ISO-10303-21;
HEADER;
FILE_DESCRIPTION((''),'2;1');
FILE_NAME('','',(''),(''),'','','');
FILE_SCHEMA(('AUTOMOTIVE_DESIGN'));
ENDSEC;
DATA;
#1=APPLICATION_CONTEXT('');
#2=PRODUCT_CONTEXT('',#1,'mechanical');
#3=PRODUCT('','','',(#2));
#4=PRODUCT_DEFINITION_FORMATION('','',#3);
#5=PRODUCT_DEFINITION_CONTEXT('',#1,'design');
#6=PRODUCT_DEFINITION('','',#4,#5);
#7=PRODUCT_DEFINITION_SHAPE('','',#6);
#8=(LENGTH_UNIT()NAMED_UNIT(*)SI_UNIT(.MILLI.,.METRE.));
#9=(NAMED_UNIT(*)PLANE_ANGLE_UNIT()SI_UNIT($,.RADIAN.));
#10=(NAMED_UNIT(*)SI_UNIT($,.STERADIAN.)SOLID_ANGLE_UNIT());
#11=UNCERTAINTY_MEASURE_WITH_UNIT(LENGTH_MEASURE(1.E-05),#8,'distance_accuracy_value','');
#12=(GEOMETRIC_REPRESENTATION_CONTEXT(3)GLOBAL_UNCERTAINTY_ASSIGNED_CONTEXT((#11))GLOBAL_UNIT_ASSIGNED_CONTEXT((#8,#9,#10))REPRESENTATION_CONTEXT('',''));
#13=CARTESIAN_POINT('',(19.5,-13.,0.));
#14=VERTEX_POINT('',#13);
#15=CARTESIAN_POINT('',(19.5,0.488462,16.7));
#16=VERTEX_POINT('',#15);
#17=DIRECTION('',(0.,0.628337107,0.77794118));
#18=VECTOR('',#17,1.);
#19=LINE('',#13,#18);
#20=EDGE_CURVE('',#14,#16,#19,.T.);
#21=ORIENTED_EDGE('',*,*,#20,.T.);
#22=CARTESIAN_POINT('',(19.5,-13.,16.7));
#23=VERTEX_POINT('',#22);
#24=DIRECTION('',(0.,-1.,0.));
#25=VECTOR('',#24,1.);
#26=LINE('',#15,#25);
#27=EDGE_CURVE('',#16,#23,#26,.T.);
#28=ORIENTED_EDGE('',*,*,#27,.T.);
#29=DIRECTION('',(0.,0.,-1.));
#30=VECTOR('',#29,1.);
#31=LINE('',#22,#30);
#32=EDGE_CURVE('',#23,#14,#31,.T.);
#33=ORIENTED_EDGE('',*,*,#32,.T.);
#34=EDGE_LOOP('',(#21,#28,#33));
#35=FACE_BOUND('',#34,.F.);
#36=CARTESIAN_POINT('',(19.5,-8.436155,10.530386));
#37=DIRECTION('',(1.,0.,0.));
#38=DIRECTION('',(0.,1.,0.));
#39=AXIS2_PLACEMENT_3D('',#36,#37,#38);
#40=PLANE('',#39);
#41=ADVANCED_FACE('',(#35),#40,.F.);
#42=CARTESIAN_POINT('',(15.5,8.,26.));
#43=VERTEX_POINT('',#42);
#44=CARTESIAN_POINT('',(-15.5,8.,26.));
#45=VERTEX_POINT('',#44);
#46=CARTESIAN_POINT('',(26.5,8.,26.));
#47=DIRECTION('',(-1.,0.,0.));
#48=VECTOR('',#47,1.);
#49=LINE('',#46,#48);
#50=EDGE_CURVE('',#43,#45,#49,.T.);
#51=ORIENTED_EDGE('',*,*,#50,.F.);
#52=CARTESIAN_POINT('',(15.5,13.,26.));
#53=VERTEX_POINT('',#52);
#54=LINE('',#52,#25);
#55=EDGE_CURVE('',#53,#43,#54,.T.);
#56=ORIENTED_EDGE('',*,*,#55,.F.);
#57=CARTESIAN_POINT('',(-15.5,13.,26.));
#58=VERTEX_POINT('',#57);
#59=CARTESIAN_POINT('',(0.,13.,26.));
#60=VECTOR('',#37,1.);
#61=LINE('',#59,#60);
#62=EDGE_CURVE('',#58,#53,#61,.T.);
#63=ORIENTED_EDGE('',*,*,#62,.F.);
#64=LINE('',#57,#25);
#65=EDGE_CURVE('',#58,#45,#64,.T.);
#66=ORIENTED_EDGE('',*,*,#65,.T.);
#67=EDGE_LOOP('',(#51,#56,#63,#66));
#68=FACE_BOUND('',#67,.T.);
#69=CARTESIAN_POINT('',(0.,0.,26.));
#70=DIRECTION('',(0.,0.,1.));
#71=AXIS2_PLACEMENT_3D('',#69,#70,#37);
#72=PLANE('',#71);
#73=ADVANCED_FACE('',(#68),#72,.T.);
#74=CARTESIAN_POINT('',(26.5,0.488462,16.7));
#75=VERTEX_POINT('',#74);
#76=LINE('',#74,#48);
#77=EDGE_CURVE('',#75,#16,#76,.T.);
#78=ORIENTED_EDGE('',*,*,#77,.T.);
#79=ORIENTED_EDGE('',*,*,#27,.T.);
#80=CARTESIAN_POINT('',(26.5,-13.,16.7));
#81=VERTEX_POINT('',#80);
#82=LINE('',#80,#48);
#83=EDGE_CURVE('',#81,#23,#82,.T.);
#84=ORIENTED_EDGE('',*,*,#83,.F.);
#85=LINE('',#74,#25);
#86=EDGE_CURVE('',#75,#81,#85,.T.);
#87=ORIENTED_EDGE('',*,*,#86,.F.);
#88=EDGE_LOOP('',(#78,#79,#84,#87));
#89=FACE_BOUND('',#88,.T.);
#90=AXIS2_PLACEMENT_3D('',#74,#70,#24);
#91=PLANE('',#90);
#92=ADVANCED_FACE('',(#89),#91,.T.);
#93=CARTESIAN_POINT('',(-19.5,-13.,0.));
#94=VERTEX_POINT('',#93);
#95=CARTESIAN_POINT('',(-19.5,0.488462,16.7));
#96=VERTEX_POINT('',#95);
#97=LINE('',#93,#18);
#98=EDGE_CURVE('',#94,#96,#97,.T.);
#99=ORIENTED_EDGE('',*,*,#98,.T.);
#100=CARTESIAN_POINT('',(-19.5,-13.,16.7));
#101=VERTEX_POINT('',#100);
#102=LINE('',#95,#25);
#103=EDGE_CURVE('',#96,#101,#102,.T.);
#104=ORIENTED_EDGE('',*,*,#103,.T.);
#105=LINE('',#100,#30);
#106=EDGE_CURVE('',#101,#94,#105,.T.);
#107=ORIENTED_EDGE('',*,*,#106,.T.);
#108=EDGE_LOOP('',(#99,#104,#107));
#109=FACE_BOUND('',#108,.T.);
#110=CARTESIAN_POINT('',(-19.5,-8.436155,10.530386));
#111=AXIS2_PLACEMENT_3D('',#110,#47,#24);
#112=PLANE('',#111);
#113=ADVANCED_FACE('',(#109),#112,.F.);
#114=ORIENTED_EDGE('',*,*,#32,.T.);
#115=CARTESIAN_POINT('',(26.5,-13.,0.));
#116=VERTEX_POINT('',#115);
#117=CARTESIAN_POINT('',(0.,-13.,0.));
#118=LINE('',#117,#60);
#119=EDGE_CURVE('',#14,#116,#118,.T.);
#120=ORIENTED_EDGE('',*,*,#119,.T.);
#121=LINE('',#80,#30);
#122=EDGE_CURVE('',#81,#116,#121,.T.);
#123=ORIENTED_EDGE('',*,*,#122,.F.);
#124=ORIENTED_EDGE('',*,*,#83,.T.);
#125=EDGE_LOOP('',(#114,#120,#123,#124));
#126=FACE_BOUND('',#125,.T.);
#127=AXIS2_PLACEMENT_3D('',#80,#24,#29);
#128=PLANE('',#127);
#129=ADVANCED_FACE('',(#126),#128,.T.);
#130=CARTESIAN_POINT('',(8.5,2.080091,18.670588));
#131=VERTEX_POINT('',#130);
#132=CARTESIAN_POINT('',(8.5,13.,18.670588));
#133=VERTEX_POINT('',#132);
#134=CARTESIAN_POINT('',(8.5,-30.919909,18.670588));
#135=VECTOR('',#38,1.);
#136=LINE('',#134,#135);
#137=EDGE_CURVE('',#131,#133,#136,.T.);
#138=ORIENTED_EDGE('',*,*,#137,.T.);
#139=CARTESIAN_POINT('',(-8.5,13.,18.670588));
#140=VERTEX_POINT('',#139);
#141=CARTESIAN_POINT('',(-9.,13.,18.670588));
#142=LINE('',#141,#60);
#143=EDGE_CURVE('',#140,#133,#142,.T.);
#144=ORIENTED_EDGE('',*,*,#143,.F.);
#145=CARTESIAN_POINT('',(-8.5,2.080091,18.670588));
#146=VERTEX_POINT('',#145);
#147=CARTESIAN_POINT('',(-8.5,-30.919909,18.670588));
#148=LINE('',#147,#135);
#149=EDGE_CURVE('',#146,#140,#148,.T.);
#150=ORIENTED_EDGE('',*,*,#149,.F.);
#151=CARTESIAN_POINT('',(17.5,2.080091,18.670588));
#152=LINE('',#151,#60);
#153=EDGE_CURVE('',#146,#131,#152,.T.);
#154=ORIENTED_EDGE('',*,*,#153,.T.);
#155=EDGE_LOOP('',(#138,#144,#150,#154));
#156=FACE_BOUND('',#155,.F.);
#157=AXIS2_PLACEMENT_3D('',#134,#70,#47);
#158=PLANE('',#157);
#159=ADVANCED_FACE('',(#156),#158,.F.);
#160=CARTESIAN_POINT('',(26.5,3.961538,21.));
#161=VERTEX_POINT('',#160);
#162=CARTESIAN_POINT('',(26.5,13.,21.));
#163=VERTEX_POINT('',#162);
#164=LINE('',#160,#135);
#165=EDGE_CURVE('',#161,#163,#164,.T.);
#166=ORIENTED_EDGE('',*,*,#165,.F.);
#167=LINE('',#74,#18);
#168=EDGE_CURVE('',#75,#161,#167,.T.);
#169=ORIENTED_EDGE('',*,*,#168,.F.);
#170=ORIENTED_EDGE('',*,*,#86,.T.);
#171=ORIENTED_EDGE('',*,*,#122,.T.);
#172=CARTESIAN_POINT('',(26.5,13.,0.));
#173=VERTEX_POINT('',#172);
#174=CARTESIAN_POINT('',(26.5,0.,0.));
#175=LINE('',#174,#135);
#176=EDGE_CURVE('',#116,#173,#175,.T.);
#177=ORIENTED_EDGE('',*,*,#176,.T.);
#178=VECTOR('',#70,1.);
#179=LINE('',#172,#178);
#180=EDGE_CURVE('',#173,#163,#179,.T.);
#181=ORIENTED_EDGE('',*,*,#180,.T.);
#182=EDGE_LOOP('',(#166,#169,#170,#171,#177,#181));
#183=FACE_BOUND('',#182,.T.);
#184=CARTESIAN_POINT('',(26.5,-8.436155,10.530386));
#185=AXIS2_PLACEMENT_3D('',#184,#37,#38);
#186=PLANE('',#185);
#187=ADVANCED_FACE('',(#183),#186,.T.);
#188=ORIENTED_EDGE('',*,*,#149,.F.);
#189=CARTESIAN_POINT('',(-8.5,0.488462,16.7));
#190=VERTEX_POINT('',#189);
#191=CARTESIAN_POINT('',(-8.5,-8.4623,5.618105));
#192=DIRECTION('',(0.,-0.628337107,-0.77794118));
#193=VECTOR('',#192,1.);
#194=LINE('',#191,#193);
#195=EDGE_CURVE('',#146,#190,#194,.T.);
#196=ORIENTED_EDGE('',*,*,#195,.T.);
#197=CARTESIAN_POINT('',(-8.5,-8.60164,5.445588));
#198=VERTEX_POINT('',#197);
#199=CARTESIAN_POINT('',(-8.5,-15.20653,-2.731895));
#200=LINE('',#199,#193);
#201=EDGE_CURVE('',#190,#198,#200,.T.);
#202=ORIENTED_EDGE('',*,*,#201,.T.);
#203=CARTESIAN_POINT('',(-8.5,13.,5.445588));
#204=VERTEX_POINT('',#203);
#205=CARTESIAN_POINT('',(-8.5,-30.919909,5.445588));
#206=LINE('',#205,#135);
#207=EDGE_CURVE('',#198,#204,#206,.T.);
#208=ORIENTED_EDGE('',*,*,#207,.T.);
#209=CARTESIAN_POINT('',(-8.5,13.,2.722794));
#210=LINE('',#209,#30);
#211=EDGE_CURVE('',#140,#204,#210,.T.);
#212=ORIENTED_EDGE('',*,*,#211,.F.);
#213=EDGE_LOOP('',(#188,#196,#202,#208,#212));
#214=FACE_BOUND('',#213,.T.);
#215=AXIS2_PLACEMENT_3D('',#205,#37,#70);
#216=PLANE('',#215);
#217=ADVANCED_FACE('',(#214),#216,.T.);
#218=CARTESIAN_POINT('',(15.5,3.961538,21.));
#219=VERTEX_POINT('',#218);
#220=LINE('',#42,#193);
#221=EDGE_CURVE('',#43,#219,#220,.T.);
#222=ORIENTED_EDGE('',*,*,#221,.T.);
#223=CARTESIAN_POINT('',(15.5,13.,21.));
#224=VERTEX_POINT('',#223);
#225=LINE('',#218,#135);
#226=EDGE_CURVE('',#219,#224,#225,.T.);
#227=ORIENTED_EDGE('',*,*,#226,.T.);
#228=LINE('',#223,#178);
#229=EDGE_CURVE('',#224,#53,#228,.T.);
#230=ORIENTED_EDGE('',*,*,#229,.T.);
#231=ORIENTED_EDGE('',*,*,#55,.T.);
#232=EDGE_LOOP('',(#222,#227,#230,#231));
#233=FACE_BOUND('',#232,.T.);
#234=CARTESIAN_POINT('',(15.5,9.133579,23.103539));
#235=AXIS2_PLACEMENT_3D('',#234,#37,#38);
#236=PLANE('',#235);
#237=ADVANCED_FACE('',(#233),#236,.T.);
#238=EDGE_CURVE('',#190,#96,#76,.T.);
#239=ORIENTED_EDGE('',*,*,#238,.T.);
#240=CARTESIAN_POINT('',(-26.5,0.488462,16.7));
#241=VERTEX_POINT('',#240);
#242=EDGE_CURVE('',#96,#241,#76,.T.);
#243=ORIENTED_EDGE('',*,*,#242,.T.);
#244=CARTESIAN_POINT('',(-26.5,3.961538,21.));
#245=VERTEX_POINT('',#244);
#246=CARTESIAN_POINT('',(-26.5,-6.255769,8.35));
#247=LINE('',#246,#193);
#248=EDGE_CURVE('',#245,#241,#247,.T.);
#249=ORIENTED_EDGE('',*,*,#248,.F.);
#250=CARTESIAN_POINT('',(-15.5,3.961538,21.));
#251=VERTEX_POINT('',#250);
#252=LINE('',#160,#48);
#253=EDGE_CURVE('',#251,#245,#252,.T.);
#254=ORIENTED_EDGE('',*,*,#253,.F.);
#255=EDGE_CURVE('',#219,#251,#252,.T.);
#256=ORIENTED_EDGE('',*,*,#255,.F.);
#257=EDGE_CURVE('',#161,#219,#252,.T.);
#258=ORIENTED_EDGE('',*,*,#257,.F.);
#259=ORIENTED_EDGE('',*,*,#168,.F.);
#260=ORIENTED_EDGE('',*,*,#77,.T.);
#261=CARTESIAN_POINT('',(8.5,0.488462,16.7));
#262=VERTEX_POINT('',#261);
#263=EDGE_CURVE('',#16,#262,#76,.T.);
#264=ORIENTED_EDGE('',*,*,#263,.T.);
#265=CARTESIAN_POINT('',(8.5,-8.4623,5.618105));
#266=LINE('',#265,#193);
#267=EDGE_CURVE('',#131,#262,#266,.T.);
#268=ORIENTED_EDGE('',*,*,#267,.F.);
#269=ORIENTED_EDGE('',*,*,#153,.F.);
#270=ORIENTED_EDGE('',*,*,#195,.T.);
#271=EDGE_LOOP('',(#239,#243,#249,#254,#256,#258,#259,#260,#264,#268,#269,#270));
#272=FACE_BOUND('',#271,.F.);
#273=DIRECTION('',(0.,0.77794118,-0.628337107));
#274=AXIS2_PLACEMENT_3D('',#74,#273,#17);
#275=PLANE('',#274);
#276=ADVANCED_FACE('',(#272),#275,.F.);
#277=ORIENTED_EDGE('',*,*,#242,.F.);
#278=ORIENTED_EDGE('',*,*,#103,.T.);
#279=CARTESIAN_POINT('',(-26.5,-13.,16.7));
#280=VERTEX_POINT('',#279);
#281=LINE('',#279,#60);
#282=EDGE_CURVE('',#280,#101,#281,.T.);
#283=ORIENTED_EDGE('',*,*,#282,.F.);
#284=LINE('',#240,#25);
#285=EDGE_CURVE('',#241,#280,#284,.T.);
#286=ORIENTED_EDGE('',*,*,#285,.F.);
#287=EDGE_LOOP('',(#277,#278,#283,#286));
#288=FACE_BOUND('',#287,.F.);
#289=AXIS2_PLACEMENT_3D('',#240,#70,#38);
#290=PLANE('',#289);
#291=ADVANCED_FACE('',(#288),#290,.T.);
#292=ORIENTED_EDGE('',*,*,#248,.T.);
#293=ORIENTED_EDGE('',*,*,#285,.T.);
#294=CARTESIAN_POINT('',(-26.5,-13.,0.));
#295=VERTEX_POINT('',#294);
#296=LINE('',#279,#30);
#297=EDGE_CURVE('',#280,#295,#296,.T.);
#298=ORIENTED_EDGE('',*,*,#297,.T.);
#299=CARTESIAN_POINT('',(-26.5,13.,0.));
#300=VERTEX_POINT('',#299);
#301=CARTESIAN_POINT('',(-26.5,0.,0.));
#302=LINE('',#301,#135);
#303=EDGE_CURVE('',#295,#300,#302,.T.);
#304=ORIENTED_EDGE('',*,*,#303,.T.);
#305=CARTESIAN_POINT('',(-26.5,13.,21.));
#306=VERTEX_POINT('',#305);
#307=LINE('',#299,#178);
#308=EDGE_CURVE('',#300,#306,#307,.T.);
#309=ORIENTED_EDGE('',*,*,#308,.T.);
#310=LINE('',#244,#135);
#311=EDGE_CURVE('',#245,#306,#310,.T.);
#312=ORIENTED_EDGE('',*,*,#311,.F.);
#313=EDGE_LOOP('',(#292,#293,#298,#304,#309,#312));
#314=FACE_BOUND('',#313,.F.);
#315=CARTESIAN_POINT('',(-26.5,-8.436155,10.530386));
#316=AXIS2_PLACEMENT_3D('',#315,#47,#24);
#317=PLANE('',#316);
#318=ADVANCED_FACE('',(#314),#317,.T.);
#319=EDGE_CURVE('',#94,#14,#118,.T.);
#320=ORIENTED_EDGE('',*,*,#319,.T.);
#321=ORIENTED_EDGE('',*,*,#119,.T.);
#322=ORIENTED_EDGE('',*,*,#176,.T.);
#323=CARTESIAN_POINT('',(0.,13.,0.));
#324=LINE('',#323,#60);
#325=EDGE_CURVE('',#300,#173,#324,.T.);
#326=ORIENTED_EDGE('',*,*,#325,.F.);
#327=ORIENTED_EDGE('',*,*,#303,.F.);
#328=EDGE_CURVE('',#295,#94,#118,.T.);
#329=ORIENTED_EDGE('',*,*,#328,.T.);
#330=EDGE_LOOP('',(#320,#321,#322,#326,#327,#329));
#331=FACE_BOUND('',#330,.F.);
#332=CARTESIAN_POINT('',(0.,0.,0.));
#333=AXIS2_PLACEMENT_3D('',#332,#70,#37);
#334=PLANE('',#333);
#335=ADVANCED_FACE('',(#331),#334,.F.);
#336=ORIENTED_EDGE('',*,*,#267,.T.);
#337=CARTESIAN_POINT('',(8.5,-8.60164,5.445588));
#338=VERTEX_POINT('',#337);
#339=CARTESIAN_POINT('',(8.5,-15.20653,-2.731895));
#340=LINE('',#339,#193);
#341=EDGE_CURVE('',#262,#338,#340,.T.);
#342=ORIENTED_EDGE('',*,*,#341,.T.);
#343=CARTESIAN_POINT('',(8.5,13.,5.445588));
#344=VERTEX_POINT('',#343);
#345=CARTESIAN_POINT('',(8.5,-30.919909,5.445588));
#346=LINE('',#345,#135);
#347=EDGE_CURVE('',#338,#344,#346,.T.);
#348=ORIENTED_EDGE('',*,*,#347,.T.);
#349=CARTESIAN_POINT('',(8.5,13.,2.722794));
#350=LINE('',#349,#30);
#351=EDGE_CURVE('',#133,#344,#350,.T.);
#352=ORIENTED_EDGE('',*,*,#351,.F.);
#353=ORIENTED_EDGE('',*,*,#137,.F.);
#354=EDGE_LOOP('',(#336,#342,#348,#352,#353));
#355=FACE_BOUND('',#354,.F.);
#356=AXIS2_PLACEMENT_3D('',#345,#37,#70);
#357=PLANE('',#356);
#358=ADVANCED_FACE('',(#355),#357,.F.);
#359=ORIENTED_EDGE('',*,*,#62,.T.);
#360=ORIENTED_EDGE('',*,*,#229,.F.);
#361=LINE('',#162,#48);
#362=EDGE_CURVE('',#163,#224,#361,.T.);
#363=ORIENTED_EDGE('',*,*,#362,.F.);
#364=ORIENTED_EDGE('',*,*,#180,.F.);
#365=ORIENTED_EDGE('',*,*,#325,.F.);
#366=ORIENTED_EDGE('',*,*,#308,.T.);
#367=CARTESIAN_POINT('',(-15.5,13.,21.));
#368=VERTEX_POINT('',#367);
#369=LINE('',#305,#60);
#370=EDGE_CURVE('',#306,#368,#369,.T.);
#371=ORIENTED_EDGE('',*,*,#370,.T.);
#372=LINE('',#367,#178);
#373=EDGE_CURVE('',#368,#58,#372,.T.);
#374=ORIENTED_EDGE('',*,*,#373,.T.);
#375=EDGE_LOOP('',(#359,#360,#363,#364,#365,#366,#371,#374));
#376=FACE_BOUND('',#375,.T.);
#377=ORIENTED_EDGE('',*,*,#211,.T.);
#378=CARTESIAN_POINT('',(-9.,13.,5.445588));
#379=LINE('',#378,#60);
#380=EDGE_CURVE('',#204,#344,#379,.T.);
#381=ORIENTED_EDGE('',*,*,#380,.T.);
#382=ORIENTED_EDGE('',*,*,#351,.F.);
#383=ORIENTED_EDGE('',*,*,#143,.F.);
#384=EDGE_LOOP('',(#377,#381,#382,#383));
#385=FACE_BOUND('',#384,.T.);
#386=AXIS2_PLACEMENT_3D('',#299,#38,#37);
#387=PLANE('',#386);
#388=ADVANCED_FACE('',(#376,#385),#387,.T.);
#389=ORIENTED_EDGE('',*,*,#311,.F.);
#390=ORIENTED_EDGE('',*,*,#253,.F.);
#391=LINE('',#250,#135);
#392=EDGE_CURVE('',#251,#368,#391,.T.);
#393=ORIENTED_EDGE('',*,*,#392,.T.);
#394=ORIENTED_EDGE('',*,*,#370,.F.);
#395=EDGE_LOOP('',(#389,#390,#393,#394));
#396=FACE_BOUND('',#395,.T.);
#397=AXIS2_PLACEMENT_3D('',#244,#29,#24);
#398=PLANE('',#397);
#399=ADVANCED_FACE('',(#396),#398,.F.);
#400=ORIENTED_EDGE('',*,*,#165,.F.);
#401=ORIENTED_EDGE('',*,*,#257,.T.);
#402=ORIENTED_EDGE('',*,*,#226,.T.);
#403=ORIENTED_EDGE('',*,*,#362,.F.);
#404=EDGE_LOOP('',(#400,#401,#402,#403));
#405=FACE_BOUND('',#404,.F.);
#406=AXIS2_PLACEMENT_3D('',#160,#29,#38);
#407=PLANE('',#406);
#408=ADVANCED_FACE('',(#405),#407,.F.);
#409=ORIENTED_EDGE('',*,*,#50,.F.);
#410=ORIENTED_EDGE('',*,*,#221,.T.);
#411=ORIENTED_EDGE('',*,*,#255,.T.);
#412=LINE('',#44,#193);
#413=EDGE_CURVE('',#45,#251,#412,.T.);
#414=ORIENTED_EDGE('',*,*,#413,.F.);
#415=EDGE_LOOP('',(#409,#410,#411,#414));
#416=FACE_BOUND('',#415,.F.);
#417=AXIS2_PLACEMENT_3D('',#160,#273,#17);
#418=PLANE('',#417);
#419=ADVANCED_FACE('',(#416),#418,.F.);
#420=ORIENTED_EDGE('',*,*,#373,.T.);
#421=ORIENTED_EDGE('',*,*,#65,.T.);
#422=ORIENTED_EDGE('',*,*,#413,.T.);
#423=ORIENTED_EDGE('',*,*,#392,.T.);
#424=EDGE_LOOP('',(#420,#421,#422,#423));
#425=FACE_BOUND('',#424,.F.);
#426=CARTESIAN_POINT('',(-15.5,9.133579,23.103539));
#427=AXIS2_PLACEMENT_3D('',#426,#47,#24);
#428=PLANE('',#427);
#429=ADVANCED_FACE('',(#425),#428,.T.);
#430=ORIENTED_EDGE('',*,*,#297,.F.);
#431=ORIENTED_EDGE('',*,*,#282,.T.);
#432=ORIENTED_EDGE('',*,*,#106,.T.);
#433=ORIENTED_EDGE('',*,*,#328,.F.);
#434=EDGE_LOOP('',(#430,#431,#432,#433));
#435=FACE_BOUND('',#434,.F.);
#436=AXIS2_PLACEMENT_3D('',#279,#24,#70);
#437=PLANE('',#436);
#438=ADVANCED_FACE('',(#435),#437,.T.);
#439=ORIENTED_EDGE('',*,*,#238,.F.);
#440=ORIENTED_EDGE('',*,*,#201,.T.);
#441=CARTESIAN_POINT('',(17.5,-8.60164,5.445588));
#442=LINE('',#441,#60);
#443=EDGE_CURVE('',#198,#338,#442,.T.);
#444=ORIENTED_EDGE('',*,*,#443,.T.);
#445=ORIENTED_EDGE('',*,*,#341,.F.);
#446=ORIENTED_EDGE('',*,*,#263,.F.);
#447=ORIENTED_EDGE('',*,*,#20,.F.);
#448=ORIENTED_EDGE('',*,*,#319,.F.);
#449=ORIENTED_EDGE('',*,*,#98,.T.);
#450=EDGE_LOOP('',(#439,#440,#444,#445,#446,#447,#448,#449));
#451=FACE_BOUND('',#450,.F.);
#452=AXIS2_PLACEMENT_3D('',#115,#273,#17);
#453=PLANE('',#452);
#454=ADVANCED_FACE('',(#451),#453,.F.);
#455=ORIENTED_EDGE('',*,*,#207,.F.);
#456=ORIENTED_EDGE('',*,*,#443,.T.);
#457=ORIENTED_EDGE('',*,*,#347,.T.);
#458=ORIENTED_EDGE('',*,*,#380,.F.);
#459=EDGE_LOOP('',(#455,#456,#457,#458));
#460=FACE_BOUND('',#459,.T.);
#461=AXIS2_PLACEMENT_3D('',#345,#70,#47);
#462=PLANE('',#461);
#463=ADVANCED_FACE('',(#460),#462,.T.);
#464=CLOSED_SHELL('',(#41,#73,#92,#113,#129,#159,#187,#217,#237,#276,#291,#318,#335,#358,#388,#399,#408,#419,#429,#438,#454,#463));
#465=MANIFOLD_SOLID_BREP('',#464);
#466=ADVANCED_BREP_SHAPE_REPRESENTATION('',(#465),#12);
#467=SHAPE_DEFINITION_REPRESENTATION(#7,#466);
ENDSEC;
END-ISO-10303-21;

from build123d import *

# Parameters (mm, degrees)
F0_W      = 53
F0_H      = 26
F1_DEPTH  = 26
F3_DEPTH  = 53.001
F4_DEPTH  = 7
F5_DEPTH  = 11
F12_W     = 17
F12_H     = 13.2250000635
F13_DEPTH = 43.9209094299


# Not quite as in the source:
# - a pattern or mirror of a feature is missing from the dataset's text; its kind, count and spacing are read off the source's solid


with BuildPart() as f1:
    # F0 (on Top) → F1 (new body)
    with BuildSketch(Plane.XY):
        Rectangle(F0_W, F0_H)
    extrude(amount=F1_DEPTH)

    # F2 (on face) → F3 (cut, through all)
    with BuildSketch(Plane.YZ.offset(26.5)):
        Polygon((3.9615384615, 21), (8, 26), (-13, 26), (-13, 16.7), (0.4884615385, 16.7), align=None)
        Polygon((0.4884615385, 16.7), (-13, 16.7), (-13, 0), align=None)
    extrude(amount=-F3_DEPTH, mode=Mode.SUBTRACT)

    # F2 (on face) → F4 (join)
    with BuildSketch(Plane.YZ.offset(26.5)):
        Polygon((0.4884615385, 16.7), (-13, 16.7), (-13, 0), align=None)
    f4 = extrude(amount=-F4_DEPTH)

    # F4_copies: F4 across plane
    add(f4.mirror(Plane(origin=(0, 0, 0), x_dir=(0, 0, -1), z_dir=(-1, 0, 0))))

    # F2 (on face) → F5 (cut)
    with BuildSketch(Plane.YZ.offset(26.5)):
        Polygon((13, 21), (13, 26), (8, 26), (3.9615384615, 21), align=None)
    f5 = extrude(amount=-F5_DEPTH, mode=Mode.SUBTRACT)

    # F5_copies: F5 across plane
    add(f5.mirror(Plane(origin=(0, 0, 0), x_dir=(0, 0, -1), z_dir=(-1, 0, 0))), mode=Mode.SUBTRACT)

    # F12 (on 3pt) → F13 (cut, through all)
    with BuildSketch(Plane(origin=(0, -30.9199094299, 0), x_dir=(-1, 0, 0), z_dir=(0, 1, 0))):
        with Locations((0, 12.0580882932)):
            Rectangle(F12_W, F12_H)
    extrude(amount=F13_DEPTH, mode=Mode.SUBTRACT)


solid = f1.part
